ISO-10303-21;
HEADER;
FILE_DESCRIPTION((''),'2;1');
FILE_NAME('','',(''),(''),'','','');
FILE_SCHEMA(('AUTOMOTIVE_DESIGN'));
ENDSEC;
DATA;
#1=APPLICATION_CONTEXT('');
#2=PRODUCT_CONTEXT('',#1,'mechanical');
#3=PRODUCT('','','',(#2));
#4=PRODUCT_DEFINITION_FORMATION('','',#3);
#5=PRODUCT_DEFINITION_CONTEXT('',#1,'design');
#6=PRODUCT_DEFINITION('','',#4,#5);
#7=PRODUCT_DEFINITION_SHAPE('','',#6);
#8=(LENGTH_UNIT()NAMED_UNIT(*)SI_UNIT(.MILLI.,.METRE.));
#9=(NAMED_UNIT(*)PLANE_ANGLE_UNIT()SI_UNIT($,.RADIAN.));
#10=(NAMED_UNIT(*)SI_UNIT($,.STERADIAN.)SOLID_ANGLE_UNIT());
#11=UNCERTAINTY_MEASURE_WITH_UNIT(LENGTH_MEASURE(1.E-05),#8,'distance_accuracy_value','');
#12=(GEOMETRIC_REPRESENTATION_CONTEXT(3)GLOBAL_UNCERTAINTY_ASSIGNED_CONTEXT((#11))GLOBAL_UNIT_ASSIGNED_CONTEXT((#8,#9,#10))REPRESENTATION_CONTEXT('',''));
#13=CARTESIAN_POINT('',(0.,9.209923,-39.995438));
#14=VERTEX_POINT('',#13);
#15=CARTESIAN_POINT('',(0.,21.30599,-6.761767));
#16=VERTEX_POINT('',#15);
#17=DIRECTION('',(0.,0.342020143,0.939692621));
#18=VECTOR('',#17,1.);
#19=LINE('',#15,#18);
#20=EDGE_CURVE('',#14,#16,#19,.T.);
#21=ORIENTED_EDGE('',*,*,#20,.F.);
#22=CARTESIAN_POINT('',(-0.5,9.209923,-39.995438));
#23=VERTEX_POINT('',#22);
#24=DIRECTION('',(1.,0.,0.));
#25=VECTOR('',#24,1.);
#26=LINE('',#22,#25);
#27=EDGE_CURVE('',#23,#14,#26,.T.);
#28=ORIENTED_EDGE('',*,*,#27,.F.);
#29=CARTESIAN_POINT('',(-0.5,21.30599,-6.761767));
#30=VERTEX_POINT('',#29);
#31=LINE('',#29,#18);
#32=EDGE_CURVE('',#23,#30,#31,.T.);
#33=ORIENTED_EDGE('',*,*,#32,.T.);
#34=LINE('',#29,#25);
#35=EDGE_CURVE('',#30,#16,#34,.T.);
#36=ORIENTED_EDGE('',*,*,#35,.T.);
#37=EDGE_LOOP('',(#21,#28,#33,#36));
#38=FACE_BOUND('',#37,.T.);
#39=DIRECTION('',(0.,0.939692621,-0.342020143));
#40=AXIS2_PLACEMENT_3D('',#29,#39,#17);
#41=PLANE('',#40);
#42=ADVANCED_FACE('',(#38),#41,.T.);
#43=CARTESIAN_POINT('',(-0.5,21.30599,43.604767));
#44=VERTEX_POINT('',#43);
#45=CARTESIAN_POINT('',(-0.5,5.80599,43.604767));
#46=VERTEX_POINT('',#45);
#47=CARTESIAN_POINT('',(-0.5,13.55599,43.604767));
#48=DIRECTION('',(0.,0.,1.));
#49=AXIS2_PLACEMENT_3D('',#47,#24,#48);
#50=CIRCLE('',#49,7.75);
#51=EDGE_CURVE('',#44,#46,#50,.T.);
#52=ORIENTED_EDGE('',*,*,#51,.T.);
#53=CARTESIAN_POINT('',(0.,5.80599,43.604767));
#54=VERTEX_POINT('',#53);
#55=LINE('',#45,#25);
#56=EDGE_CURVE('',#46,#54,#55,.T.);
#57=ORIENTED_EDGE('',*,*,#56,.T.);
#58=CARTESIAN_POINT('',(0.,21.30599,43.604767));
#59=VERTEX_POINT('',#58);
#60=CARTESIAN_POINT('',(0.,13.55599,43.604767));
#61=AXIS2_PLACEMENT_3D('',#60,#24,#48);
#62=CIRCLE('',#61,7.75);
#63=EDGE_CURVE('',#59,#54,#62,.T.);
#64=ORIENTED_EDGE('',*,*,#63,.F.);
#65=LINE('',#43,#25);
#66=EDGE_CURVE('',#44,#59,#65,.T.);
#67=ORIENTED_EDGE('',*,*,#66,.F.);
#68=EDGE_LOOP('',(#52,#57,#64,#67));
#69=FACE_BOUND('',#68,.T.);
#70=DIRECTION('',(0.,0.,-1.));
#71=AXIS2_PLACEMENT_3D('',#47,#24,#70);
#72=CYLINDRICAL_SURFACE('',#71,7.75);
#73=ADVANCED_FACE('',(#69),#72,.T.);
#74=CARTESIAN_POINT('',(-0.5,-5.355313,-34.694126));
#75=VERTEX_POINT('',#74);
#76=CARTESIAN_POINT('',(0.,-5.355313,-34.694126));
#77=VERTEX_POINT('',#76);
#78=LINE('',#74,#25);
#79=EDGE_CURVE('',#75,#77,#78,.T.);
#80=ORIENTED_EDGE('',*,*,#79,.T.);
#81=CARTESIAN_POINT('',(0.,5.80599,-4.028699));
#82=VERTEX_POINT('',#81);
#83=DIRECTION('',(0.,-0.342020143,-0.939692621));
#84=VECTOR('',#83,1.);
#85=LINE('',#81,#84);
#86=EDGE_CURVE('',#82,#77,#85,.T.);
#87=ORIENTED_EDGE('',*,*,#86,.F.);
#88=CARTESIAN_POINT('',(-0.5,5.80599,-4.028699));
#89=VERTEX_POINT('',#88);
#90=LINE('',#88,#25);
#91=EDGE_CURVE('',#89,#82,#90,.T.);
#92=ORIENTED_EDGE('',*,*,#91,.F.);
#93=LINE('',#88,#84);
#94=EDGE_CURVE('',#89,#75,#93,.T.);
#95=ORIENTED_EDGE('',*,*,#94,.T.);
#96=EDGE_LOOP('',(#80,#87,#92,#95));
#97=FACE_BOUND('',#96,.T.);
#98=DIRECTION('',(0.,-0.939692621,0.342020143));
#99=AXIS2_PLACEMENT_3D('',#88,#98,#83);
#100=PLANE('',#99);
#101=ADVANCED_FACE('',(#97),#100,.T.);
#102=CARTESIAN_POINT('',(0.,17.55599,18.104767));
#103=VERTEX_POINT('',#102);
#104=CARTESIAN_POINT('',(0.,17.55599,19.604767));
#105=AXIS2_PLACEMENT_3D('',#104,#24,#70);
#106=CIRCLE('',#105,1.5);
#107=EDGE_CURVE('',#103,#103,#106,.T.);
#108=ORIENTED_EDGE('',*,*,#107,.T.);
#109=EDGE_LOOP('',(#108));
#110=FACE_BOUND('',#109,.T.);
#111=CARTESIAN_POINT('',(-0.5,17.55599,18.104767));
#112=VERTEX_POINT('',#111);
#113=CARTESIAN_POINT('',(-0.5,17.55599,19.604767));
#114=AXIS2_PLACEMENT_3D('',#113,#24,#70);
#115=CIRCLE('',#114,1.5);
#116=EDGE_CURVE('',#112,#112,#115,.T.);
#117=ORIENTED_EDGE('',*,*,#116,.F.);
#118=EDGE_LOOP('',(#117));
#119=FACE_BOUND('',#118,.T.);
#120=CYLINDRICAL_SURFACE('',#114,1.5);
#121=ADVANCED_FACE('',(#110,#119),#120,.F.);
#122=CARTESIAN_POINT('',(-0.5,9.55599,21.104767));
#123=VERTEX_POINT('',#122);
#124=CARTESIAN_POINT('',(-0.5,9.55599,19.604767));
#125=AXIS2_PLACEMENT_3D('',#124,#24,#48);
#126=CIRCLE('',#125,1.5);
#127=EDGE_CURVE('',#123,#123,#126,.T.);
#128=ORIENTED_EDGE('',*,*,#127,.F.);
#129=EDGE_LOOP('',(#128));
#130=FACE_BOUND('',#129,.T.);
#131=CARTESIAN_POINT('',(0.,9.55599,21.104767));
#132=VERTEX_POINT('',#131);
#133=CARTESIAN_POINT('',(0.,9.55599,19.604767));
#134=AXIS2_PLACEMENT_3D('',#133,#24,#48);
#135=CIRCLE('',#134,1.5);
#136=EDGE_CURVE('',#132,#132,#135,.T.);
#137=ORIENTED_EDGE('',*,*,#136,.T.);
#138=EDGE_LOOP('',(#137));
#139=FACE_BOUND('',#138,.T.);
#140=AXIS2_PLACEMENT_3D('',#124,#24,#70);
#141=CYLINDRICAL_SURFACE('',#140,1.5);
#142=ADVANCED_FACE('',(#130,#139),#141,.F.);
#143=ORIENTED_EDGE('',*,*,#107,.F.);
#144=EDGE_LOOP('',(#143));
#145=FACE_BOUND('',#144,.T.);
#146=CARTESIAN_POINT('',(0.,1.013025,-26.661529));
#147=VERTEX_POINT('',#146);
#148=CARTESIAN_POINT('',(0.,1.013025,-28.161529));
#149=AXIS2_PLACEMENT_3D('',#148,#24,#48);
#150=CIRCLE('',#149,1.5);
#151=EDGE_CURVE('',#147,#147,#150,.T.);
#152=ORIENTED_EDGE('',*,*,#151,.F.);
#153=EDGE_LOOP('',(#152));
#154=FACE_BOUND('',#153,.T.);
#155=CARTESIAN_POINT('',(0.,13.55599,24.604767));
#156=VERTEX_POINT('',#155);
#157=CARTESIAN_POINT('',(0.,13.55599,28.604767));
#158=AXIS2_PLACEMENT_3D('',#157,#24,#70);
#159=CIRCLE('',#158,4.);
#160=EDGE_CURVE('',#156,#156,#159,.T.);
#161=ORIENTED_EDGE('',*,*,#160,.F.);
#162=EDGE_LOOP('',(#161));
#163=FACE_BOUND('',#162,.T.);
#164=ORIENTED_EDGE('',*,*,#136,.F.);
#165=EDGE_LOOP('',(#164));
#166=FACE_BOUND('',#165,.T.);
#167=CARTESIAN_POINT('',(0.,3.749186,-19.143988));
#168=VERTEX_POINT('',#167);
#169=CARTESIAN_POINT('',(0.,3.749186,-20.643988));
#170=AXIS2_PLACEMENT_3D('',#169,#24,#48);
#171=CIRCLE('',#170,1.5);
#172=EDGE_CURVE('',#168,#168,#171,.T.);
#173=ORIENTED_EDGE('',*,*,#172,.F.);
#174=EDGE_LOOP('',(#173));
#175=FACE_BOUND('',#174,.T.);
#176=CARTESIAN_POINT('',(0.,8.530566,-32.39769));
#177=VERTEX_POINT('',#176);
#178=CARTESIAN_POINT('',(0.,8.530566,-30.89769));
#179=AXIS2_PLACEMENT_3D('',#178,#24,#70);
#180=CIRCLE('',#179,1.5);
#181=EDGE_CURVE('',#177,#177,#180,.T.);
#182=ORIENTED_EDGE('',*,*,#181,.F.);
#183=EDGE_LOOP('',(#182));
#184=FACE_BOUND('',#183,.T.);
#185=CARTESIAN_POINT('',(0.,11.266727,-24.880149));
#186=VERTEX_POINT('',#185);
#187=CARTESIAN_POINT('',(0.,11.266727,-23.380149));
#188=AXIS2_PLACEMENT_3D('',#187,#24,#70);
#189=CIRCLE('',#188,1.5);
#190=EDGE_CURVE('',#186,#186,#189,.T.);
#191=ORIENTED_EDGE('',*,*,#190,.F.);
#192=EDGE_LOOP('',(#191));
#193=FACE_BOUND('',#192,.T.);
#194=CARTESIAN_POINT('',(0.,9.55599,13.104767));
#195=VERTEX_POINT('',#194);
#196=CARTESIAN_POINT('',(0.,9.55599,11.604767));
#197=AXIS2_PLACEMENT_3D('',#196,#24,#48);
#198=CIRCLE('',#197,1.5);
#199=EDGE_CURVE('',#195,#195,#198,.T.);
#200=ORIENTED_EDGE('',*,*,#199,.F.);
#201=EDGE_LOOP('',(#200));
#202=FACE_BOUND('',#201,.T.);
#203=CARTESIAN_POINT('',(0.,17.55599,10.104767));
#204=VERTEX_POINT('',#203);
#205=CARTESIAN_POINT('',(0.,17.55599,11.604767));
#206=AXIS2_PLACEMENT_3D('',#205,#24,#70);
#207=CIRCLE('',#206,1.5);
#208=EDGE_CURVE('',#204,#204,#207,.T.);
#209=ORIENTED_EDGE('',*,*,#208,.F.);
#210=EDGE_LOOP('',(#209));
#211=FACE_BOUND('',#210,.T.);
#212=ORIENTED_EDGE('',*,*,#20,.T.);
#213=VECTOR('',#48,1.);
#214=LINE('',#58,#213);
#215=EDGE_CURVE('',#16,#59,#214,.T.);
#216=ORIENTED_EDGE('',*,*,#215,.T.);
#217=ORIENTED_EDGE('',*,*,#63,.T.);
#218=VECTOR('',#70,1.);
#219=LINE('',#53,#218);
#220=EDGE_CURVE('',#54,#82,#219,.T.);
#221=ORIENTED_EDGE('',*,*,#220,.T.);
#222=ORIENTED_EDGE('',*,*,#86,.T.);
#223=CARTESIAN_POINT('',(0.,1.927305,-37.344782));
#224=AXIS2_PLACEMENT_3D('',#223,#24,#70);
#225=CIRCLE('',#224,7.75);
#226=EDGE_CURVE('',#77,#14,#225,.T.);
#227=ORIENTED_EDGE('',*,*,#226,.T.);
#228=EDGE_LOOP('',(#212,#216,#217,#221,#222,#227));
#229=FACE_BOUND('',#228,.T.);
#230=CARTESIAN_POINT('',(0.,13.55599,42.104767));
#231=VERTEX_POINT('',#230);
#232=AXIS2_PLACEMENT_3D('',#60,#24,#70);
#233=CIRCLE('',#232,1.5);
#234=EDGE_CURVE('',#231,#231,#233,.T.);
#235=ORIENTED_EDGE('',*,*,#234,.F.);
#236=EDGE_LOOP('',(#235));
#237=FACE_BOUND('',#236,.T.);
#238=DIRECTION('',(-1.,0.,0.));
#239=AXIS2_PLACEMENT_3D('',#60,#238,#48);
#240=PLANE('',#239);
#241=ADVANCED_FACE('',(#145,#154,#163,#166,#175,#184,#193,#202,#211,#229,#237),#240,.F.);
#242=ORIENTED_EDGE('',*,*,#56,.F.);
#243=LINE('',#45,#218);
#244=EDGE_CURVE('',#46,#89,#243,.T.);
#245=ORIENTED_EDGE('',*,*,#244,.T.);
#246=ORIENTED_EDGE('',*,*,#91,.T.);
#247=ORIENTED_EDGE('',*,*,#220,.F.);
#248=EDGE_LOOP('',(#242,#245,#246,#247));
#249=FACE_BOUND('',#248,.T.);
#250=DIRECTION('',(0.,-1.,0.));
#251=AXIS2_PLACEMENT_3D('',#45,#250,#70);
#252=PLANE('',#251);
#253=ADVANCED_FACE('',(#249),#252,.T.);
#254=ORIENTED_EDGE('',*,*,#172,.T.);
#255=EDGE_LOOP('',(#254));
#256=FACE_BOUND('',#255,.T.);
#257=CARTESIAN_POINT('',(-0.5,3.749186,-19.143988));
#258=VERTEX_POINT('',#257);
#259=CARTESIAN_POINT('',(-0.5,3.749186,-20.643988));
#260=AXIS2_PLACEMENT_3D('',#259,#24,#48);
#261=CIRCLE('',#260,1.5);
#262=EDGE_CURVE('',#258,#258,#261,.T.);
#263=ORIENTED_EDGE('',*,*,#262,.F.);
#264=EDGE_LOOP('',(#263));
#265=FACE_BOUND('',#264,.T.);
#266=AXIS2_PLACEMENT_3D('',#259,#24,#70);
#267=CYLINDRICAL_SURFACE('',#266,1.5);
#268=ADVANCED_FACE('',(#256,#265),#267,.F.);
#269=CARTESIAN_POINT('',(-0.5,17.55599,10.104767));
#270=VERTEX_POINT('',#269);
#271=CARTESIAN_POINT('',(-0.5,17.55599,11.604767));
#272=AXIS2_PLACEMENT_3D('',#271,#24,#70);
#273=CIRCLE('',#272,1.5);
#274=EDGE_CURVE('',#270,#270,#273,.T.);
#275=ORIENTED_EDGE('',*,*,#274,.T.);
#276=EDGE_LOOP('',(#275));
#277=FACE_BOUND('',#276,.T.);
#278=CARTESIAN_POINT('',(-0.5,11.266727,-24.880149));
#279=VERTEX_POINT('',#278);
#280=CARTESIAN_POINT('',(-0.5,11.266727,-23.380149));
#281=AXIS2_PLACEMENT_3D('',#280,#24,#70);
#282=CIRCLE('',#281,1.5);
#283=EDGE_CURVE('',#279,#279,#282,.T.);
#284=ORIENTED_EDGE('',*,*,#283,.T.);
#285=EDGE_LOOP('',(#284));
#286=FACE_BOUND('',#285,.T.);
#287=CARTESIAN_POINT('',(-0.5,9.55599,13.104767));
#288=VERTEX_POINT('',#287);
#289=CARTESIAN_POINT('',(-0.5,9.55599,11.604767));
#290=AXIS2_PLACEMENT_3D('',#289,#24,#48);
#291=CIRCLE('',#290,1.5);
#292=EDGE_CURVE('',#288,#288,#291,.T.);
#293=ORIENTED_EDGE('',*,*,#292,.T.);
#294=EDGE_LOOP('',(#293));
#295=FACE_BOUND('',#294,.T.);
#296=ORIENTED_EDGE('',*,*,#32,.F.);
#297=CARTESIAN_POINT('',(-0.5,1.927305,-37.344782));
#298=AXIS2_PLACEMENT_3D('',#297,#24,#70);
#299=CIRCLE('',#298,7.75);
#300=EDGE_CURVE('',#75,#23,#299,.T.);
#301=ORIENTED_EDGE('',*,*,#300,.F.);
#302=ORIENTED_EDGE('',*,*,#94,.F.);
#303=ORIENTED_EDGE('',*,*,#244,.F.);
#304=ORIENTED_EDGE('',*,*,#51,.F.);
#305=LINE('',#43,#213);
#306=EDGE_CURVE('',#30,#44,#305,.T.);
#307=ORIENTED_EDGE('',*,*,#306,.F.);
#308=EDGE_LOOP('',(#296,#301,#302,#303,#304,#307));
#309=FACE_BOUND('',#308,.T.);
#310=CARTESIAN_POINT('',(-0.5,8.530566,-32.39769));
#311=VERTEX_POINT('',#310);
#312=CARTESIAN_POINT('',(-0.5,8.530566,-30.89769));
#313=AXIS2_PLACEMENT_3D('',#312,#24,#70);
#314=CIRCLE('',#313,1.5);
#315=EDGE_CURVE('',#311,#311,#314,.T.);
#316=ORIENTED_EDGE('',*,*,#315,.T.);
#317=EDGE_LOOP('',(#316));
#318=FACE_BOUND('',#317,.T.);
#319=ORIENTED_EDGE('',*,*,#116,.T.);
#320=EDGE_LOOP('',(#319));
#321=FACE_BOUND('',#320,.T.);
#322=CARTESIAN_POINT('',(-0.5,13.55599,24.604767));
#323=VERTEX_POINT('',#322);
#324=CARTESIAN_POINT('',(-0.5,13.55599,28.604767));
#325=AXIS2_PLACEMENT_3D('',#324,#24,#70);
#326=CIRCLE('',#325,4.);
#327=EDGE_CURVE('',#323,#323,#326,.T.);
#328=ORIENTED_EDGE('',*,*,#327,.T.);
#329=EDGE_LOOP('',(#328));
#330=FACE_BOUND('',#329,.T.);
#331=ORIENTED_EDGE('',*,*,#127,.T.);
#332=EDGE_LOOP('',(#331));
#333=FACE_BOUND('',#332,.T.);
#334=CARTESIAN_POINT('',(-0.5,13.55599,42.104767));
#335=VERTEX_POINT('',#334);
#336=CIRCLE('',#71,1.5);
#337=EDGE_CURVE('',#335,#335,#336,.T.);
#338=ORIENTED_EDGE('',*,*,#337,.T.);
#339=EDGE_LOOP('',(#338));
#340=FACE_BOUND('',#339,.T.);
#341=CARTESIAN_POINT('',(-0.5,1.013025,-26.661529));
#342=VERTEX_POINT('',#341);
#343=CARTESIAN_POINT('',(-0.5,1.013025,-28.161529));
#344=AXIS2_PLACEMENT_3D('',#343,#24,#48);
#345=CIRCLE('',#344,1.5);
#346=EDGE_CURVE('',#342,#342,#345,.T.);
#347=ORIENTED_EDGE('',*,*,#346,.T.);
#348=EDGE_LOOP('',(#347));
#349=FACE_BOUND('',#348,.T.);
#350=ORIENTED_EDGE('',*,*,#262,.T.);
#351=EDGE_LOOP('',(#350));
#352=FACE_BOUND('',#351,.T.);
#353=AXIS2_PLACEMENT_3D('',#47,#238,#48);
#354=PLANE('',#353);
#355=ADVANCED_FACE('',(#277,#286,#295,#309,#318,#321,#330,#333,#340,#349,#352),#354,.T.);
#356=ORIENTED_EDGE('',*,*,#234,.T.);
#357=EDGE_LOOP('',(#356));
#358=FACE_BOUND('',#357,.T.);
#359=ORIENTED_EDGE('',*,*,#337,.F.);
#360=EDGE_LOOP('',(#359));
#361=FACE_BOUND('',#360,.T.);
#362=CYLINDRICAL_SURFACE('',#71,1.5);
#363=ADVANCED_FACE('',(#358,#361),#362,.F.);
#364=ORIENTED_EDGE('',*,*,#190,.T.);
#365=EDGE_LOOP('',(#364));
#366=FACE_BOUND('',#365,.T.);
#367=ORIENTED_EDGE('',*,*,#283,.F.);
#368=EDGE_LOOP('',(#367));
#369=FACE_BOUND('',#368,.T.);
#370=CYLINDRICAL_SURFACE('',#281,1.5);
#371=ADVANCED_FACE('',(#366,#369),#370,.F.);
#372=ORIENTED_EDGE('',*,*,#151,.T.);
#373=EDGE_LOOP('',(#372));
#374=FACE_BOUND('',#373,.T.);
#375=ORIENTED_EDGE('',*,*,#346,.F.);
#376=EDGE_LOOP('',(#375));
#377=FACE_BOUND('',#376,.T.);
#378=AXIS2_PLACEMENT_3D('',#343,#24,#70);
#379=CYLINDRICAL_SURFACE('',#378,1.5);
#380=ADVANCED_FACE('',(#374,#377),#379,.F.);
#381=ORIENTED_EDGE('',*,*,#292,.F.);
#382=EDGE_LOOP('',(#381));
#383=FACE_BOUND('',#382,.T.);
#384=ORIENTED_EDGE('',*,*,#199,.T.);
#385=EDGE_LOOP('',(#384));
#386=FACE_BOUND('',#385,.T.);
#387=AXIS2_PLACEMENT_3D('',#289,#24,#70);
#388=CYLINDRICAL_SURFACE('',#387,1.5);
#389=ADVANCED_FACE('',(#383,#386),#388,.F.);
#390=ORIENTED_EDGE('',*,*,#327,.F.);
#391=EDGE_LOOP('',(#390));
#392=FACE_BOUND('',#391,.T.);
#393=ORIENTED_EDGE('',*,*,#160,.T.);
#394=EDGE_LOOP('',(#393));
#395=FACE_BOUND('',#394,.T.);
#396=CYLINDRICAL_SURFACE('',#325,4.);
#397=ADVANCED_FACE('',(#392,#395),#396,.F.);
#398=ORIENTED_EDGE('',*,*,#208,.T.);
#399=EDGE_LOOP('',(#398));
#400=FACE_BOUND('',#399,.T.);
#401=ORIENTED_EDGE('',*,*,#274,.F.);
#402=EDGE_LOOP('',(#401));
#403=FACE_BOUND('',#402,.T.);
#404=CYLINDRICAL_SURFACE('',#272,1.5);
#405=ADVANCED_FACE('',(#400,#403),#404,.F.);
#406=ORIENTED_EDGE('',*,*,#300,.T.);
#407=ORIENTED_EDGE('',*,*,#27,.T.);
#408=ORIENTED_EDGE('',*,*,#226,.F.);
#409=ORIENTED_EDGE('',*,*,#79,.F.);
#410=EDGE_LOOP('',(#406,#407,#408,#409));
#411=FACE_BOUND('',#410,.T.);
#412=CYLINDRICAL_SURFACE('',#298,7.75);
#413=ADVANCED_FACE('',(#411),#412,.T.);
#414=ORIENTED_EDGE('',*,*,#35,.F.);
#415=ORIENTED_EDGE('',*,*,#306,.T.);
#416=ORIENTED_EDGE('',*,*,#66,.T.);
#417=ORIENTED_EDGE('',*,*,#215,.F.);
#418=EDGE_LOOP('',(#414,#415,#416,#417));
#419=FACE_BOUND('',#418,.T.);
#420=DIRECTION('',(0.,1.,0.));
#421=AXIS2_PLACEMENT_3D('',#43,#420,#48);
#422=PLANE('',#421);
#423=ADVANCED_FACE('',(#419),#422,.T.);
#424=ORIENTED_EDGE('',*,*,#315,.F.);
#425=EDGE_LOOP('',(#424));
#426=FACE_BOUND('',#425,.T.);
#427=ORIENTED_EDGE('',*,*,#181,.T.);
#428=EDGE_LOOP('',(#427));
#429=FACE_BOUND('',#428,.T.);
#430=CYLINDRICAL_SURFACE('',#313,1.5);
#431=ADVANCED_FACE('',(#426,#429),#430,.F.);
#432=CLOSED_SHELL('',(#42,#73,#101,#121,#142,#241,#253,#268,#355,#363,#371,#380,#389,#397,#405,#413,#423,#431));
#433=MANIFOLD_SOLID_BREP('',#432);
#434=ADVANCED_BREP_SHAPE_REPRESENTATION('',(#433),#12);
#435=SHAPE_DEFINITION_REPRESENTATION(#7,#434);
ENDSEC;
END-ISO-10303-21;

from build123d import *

# Parameters (mm, degrees)
CROQUIS1_R        = 1.5
CROQUIS1_R_2      = 4
BRIDA_BASE1_DEPTH = 0.5


# Sheet-metal steps are written as plain solids
with BuildPart() as part:
    # Croquis1 → Brida base1 (new body)
    with BuildSketch(Plane(origin=(0, 0, 0), x_dir=(0, 0, -1), z_dir=(1, 0, 0))):
        with BuildLine():
            Line((-43.604767051, 5.805989848), (4.028698849, 5.805989848))
            Line((4.028698849, 5.805989848), (34.694125945, -5.355312836))
            ThreePointArc((34.694125945, -5.355312836), (44.627399867, -0.723351136), (39.995438167, 9.209922786))
            Line((39.995438167, 9.209922786), (6.76176705, 21.305989848))
            Line((6.76176705, 21.305989848), (-43.604767051, 21.305989848))
            ThreePointArc((-43.604767051, 21.305989848), (-51.354767051, 13.555989848), (-43.604767051, 5.805989848))
        make_face()
        with Locations((-19.604767051, 17.555989848)):
            Circle(CROQUIS1_R, mode=Mode.SUBTRACT)
        with Locations(Location((-19.604767051, 9.555989848, 0), (0, 0, 180))):
            Circle(CROQUIS1_R, mode=Mode.SUBTRACT)
        with Locations((-43.604767051, 13.555989848)):
            Circle(CROQUIS1_R, mode=Mode.SUBTRACT)
        with Locations((23.380149081, 11.2667268)):
            Circle(CROQUIS1_R, mode=Mode.SUBTRACT)
        with Locations(Location((20.643987934, 3.749185834, 0), (0, 0, 180))):
            Circle(CROQUIS1_R, mode=Mode.SUBTRACT)
        with Locations((-28.604767051, 13.555989848)):
            Circle(CROQUIS1_R_2, mode=Mode.SUBTRACT)
        with Locations((30.897690047, 8.530565653)):
            Circle(CROQUIS1_R, mode=Mode.SUBTRACT)
        with Locations(Location((28.161528901, 1.013024687, 0), (0, 0, 180))):
            Circle(CROQUIS1_R, mode=Mode.SUBTRACT)
        with Locations((-11.604767051, 17.555989848)):
            Circle(CROQUIS1_R, mode=Mode.SUBTRACT)
        with Locations(Location((-11.604767051, 9.555989848, 0), (0, 0, 180))):
            Circle(CROQUIS1_R, mode=Mode.SUBTRACT)
    extrude(amount=-BRIDA_BASE1_DEPTH)


solid = part.part
